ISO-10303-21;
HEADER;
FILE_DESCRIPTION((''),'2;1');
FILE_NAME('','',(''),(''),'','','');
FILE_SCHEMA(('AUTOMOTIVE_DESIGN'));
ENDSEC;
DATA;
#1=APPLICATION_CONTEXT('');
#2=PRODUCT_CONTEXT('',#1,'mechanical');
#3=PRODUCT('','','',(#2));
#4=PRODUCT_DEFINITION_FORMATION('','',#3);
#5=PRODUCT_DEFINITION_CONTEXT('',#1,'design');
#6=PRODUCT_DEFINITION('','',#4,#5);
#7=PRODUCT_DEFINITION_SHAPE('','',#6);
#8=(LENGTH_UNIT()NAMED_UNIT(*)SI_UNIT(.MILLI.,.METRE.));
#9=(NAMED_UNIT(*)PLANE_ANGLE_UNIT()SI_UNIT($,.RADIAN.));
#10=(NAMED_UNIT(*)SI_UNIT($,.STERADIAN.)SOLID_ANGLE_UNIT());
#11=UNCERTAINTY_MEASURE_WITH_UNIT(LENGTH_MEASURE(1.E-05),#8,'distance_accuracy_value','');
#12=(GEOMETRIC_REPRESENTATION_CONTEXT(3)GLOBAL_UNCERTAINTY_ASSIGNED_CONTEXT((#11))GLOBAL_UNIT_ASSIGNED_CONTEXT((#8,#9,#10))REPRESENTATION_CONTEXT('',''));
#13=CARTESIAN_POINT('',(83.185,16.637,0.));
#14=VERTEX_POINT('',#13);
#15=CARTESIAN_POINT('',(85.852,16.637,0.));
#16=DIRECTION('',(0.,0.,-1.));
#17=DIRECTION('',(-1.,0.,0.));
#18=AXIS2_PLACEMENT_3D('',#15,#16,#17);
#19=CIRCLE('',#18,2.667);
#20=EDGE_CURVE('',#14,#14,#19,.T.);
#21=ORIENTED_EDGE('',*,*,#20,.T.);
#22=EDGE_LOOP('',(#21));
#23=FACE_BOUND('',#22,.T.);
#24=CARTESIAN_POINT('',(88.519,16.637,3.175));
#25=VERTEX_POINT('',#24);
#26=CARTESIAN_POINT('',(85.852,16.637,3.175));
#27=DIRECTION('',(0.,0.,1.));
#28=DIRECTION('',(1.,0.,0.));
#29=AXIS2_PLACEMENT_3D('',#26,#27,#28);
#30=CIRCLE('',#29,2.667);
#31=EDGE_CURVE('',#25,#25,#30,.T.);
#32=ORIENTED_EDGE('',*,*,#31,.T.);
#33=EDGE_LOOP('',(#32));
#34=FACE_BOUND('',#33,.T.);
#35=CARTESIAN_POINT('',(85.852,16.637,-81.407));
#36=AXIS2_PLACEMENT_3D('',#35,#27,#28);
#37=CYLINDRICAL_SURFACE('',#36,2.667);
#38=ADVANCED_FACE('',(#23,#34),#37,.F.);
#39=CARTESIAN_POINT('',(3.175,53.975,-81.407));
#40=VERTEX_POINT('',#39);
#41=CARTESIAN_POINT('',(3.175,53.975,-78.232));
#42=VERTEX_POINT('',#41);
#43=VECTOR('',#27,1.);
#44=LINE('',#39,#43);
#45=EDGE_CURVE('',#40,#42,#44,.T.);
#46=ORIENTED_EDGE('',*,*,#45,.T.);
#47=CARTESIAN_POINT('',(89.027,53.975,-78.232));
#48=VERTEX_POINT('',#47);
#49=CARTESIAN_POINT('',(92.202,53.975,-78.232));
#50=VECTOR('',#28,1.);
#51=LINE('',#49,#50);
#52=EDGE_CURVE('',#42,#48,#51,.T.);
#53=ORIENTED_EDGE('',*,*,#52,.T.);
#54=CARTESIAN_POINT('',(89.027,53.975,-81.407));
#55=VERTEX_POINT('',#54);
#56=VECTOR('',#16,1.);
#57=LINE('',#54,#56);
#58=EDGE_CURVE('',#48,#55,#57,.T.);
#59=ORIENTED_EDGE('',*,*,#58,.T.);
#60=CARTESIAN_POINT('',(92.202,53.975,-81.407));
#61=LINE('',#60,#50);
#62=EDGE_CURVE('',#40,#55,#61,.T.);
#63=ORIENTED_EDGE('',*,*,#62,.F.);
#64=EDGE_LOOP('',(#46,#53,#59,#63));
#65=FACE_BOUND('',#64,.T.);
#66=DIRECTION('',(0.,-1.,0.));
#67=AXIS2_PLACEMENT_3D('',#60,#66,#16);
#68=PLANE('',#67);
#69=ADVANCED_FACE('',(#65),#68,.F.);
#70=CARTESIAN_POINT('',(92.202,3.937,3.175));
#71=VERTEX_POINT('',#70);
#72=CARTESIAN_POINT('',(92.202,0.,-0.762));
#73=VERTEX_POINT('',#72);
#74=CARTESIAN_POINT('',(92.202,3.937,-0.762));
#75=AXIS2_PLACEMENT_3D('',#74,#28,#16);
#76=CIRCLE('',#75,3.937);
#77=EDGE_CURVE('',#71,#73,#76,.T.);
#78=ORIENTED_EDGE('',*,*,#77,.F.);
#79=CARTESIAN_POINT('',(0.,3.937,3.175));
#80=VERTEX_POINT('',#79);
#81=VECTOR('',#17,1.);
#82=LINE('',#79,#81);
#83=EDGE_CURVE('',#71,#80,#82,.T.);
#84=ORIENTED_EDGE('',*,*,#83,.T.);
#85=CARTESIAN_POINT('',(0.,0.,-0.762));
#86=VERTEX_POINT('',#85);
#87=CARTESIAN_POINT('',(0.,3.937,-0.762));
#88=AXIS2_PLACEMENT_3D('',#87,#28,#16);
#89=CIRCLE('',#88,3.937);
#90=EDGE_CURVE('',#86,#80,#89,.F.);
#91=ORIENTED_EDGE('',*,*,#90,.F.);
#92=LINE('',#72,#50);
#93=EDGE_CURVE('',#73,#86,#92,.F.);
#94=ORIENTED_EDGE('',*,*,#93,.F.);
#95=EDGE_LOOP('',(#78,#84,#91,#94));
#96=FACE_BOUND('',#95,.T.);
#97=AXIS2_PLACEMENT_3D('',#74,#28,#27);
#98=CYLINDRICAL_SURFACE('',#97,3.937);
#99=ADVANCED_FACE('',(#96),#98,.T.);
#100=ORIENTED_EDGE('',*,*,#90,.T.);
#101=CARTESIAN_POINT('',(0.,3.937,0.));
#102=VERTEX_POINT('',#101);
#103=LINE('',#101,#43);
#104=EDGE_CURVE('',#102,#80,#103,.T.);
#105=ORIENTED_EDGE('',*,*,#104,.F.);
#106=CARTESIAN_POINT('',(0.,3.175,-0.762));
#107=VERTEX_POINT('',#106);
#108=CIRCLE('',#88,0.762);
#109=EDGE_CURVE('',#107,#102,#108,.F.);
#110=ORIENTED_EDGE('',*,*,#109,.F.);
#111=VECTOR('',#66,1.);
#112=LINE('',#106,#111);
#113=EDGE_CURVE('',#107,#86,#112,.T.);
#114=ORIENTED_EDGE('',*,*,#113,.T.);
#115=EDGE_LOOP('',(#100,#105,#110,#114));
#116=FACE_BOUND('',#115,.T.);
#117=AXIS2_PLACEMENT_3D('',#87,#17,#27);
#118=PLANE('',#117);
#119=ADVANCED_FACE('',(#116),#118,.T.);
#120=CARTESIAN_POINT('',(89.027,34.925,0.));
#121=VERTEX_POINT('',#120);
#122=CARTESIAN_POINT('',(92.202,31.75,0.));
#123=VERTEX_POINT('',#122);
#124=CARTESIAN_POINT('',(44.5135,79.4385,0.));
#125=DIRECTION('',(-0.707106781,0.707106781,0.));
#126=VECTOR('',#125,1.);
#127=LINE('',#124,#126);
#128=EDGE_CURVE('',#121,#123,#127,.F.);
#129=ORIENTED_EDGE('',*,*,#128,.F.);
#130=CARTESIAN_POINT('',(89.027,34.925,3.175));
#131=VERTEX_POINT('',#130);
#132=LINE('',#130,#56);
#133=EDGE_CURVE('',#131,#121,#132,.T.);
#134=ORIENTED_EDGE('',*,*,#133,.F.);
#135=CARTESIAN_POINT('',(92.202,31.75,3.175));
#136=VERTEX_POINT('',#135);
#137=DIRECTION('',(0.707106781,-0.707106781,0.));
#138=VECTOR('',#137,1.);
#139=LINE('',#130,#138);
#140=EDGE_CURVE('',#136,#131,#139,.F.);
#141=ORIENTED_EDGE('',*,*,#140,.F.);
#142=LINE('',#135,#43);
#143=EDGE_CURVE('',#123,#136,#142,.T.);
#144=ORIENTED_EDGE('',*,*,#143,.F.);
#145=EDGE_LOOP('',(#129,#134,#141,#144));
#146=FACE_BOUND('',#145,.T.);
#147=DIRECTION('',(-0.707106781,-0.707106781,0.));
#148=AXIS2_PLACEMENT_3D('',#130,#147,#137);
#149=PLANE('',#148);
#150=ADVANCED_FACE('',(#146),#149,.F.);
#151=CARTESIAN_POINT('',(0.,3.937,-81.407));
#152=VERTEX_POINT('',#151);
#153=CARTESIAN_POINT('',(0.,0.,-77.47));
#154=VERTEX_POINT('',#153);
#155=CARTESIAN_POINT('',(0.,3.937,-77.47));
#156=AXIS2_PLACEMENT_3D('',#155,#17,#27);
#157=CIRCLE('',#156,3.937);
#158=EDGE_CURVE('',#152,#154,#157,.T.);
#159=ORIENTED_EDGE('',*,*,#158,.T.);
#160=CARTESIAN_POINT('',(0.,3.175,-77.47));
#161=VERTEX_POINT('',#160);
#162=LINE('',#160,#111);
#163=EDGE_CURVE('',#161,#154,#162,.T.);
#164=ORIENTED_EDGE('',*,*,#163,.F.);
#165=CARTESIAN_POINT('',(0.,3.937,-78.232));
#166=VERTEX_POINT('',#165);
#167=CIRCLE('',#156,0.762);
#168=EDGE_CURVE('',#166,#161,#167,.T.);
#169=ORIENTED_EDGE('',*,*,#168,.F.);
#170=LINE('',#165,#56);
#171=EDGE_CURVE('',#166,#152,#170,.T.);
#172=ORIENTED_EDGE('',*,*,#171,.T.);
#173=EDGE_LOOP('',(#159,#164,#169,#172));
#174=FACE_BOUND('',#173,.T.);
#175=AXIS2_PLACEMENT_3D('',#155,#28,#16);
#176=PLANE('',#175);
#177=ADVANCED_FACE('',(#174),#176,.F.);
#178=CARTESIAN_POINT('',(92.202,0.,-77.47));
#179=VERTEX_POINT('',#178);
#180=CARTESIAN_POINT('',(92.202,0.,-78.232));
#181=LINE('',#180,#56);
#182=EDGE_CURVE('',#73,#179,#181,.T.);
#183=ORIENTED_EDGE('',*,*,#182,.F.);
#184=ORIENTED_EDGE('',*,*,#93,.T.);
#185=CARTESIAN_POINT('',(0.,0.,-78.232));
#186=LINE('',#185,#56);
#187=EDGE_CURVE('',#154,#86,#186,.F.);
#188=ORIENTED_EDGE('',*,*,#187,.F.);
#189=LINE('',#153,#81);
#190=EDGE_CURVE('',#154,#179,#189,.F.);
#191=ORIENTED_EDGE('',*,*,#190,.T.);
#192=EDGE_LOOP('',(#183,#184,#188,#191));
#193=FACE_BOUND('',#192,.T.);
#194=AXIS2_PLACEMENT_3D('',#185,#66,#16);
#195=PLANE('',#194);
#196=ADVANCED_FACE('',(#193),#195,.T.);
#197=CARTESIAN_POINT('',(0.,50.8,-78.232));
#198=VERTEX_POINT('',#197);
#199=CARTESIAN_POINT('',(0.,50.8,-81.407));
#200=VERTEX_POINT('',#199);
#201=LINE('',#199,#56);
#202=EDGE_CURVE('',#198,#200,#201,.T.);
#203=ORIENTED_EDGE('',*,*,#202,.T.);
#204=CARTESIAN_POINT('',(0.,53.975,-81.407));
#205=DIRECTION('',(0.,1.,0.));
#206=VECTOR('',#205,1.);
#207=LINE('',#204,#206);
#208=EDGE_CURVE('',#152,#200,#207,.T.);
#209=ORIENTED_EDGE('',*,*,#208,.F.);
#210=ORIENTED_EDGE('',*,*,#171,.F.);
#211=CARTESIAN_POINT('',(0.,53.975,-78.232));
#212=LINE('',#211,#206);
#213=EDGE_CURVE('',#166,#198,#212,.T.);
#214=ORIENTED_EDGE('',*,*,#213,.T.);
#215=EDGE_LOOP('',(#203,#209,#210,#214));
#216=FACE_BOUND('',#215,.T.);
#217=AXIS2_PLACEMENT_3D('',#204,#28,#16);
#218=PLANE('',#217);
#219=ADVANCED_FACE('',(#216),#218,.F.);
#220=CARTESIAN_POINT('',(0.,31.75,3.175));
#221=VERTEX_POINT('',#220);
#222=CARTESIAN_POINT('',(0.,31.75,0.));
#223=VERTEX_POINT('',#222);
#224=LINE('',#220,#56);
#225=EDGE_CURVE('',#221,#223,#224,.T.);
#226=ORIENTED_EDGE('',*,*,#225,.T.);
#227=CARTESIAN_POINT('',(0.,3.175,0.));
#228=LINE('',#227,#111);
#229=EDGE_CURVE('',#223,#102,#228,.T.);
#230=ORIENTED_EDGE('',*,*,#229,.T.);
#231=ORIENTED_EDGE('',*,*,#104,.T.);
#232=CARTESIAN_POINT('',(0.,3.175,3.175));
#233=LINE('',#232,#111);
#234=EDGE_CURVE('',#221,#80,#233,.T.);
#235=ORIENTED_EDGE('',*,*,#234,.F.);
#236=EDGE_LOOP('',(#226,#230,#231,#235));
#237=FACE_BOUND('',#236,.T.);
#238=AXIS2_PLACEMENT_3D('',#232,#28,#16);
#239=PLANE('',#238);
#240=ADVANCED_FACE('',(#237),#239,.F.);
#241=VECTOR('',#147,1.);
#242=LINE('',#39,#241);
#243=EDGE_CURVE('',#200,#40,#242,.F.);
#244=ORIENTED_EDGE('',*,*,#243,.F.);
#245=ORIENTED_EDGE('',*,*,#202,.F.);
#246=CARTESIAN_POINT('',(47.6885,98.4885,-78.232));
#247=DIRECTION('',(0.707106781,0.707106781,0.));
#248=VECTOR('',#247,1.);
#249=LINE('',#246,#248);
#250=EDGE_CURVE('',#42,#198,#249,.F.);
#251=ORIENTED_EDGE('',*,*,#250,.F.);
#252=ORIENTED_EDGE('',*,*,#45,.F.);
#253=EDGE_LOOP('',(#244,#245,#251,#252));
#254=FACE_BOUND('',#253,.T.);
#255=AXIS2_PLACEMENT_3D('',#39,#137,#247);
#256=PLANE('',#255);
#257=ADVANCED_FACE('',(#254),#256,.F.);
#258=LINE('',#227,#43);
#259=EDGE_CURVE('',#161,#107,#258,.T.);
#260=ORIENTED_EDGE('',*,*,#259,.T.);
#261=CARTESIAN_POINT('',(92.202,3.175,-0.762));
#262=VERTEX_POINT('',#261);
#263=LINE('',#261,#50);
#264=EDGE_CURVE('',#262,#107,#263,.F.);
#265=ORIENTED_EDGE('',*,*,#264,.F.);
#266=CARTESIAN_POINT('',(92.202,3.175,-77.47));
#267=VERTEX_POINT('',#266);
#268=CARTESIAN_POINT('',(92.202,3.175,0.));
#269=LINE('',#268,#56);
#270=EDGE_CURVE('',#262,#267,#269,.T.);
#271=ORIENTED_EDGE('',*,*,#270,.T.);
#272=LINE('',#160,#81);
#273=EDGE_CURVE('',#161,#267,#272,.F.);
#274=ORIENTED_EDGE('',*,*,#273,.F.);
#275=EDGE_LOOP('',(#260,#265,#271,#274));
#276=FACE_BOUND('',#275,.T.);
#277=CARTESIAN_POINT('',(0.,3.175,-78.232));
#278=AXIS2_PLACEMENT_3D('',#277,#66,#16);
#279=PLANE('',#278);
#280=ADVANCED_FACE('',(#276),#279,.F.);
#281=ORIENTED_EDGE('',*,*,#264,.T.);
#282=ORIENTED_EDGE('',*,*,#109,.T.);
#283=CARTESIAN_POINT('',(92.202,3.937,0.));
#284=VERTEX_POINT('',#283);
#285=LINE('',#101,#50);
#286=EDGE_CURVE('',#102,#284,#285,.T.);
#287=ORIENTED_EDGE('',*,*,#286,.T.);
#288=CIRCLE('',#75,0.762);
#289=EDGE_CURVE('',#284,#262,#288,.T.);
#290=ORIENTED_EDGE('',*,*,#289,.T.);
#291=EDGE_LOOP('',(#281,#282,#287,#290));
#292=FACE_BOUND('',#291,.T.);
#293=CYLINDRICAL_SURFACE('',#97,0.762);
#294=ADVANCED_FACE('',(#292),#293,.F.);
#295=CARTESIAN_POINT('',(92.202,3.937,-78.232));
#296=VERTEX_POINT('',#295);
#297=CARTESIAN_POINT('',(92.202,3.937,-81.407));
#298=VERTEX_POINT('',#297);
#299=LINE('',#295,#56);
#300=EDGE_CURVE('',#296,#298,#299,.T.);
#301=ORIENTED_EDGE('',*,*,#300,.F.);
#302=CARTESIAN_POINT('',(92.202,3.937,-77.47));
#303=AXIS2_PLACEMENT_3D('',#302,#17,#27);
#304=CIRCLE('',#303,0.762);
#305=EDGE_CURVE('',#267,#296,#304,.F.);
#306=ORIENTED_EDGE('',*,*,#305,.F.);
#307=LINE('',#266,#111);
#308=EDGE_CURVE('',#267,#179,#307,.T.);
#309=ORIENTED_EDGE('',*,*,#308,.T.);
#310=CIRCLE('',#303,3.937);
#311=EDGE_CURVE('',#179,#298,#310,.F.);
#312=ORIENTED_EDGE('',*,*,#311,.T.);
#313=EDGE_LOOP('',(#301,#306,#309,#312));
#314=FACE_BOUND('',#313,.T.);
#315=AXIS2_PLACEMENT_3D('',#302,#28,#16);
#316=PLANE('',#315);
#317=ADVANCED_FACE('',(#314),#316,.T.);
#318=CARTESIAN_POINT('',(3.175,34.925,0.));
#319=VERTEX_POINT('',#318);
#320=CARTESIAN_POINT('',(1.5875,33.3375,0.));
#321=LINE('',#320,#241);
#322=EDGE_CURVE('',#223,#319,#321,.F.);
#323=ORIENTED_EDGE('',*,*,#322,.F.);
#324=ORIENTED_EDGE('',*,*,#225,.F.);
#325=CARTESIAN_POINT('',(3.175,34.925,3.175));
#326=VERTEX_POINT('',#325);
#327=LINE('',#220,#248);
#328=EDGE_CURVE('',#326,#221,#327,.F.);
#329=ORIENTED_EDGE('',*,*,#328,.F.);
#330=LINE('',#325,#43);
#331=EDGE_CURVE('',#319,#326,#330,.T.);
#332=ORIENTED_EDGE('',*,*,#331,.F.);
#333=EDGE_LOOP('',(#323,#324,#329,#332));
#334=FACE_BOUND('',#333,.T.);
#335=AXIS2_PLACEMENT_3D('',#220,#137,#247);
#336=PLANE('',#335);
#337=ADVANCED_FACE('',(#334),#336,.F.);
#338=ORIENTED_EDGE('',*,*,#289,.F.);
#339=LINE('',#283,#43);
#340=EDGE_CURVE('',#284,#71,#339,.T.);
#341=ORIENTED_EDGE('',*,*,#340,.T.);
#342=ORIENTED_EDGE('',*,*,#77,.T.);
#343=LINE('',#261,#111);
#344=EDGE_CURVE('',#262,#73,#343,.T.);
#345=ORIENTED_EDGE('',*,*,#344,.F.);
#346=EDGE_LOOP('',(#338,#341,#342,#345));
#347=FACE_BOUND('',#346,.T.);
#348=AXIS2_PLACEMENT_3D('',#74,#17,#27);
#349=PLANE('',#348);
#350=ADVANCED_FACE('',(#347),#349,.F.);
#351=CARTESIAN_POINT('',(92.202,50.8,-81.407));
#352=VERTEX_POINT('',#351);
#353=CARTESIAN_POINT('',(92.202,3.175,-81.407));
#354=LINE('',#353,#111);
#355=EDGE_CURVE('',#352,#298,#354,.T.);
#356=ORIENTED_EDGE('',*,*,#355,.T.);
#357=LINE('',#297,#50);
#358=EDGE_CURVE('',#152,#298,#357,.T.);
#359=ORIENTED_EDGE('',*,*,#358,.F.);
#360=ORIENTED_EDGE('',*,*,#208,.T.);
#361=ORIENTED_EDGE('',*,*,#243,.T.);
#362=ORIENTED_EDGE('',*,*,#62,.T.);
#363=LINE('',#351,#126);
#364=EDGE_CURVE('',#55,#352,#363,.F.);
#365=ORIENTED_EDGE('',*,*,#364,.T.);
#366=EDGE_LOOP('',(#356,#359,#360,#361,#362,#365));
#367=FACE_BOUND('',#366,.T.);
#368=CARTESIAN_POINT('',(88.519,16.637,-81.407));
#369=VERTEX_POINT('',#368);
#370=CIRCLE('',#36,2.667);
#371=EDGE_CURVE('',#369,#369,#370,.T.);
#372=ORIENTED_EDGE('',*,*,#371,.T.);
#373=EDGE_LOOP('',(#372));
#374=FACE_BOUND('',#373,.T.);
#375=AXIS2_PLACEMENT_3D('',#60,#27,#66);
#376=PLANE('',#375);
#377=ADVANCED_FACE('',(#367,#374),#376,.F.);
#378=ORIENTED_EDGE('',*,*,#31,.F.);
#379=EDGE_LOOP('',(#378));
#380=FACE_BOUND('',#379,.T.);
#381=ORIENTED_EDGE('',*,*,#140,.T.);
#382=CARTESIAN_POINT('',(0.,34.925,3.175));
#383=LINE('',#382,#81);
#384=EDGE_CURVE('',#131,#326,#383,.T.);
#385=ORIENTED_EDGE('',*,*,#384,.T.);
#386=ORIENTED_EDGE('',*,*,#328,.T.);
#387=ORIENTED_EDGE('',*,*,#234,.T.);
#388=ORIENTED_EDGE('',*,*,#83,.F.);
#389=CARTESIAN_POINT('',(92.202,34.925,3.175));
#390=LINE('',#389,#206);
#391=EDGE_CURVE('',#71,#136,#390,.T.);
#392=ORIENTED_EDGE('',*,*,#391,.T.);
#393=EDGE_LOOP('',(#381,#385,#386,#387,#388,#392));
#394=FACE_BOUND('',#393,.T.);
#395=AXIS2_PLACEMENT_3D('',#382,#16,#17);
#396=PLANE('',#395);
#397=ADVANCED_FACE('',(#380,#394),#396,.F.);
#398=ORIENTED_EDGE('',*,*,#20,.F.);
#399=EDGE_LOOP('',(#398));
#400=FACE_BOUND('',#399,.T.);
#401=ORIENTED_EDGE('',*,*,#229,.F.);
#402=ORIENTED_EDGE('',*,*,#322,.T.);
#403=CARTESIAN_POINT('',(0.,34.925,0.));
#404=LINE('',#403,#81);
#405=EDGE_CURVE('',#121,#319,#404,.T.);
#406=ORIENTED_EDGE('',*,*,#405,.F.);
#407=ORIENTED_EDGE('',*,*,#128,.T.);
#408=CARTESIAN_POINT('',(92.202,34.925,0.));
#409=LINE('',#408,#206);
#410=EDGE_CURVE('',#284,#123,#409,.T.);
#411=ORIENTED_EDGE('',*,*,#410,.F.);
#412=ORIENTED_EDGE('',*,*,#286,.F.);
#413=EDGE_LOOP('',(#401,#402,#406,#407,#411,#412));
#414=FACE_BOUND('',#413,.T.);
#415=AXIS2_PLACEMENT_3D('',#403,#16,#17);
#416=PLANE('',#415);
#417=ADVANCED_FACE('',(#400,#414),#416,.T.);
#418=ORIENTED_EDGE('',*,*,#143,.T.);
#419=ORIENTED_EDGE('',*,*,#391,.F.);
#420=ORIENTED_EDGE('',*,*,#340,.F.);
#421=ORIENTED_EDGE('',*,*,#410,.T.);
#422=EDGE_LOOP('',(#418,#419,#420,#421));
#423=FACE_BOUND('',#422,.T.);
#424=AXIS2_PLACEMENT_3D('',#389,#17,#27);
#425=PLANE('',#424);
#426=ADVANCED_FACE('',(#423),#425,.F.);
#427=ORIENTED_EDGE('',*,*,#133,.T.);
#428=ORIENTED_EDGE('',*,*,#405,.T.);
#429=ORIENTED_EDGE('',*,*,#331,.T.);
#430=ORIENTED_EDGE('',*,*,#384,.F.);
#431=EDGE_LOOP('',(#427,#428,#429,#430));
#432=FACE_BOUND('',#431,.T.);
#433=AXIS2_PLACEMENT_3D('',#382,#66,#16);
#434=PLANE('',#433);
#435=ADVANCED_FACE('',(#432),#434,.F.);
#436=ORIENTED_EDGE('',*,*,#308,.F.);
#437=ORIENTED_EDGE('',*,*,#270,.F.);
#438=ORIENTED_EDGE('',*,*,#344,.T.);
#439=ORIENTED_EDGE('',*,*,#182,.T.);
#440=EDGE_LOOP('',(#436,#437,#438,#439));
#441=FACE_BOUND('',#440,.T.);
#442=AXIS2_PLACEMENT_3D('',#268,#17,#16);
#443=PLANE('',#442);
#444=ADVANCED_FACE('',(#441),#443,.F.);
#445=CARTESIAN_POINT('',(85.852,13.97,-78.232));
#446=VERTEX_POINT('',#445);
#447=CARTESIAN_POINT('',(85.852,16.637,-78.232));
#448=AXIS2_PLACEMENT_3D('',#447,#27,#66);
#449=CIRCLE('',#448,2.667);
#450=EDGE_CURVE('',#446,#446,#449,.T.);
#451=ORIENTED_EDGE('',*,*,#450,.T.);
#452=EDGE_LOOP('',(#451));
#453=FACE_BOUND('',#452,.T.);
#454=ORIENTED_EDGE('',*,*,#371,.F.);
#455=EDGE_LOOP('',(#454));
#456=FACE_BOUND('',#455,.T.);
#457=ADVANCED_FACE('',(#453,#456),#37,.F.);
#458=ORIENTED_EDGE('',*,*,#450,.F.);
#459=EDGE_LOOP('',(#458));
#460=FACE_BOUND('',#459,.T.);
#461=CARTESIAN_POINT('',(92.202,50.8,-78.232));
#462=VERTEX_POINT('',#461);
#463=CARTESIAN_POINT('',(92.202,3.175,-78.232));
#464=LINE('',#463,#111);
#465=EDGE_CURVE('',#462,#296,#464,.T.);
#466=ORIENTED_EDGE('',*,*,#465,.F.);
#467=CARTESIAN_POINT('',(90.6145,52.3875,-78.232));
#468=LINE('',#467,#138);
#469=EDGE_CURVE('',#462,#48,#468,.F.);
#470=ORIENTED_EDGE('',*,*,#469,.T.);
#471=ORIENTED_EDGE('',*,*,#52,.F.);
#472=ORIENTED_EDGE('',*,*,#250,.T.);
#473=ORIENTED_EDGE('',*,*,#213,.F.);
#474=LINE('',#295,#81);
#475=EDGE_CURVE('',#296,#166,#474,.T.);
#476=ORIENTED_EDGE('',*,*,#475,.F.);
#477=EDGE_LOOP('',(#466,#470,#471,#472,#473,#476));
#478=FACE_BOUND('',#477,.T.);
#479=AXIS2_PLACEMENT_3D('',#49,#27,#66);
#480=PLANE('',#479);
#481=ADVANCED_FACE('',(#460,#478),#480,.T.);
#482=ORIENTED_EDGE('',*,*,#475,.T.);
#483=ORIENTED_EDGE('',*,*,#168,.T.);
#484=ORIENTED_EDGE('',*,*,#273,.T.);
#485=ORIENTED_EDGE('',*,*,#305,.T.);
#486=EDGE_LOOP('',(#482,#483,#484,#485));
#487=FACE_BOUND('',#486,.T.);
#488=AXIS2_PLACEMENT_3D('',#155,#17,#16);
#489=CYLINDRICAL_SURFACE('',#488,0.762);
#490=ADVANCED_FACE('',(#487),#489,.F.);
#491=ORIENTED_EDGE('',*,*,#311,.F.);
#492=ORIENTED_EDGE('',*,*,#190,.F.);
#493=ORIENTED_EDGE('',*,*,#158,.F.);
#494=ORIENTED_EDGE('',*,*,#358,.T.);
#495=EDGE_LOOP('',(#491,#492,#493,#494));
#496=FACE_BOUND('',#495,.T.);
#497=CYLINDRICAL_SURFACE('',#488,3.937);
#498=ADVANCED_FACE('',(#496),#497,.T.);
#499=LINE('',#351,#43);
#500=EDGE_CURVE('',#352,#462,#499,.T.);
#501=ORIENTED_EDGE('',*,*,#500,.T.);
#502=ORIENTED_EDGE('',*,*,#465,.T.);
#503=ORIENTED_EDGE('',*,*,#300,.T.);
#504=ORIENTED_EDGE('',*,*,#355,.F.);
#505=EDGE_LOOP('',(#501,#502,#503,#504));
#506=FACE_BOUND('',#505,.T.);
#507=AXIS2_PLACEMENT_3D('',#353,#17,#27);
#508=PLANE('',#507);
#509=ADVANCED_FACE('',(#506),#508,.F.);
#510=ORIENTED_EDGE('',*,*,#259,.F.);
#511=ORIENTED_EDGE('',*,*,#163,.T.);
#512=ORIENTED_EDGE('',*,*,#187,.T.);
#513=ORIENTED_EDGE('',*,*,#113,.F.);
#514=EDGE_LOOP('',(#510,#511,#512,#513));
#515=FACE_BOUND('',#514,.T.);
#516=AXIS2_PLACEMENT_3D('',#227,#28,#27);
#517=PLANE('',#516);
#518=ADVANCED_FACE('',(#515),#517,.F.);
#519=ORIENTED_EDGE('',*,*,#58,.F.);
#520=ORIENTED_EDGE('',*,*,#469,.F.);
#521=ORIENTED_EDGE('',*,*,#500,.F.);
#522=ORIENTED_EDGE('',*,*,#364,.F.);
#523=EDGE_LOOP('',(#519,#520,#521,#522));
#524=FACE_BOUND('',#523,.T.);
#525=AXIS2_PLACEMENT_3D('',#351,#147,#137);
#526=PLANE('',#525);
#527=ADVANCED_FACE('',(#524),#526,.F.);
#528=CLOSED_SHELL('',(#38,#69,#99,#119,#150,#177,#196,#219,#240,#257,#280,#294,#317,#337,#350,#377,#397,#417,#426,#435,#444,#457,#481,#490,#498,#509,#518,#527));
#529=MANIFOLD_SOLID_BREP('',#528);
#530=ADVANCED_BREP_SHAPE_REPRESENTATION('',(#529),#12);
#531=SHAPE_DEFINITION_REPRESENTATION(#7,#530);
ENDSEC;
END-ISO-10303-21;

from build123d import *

# Parameters (mm, degrees)
SKETCH1_W            = 92.202
SKETCH1_H            = 78.232
BOSS_EXTRUDE1_DEPTH  = 3.175
EDGE_FLANGE1_DEPTH   = 92.202
EDGE_FLANGE1_2_DEPTH = 92.202
EDGE_FLANGE2_DEPTH   = 92.202
EDGE_FLANGE2_2_DEPTH = 92.202
SKETCH9_R            = 2.667
CUT_EXTRUDE1_DEPTH   = 137.266738983
CHAMFER1_SIZE        = 3.175


# Read off the part's stored shape, not the designer's step: Edge-Flange1, Edge-Flange2
with BuildPart() as part:
    # Sketch1 → Boss-Extrude1 (new body)
    with BuildSketch(Plane(origin=(0, 0, 0), x_dir=(1, 0, 0), z_dir=(0, 1, 0))):
        with Locations((46.101, 39.116)):
            Rectangle(SKETCH1_W, SKETCH1_H)
    extrude(amount=BOSS_EXTRUDE1_DEPTH)

    # Edge-Flange1 outline → Edge-Flange1 (cut)
    with BuildSketch(Plane.YZ):
        with BuildLine():
            Line((0, -78.232), (0.074445793, -78.232))
            ThreePointArc((0.074445793, -78.232), (0.018655648, -77.852813981), (0, -77.47))
            Line((0, -77.47), (0, -78.232))
        make_face()
    extrude(amount=EDGE_FLANGE1_DEPTH, mode=Mode.SUBTRACT)

    # Edge-Flange1 2 outline → Edge-Flange1 2 (add)
    with BuildSketch(Plane.YZ):
        with BuildLine():
            ThreePointArc((0.074445793, -78.232), (1.4370025, -80.511378224), (3.937, -81.407))
            Line((3.937, -81.407), (53.975, -81.407))
            Line((53.975, -81.407), (53.975, -78.232))
            Line((53.975, -78.232), (3.937, -78.232))
            ThreePointArc((3.937, -78.232), (3.398184633, -78.008815367), (3.175, -77.47))
            Line((3.175, -77.47), (3.175, -78.232))
            Line((3.175, -78.232), (0.074445793, -78.232))
        make_face()
    extrude(amount=EDGE_FLANGE1_2_DEPTH)

    # Edge-Flange2 outline → Edge-Flange2 (cut)
    with BuildSketch(Plane.YZ):
        with BuildLine():
            ThreePointArc((0, -0.762), (0.018655648, -0.379186019), (0.074445793, 0))
            Line((0.074445793, 0), (0, 0))
            Line((0, 0), (0, -0.762))
        make_face()
    extrude(amount=EDGE_FLANGE2_DEPTH, mode=Mode.SUBTRACT)

    # Edge-Flange2 2 outline → Edge-Flange2 2 (add)
    with BuildSketch(Plane.YZ):
        with BuildLine():
            Line((34.925, 3.175), (3.937, 3.175))
            ThreePointArc((3.937, 3.175), (1.4370025, 2.279378224), (0.074445793, 0))
            Line((0.074445793, 0), (3.175, 0))
            Line((3.175, 0), (3.175, -0.762))
            ThreePointArc((3.175, -0.762), (3.398184633, -0.223184633), (3.937, 0))
            Line((3.937, 0), (34.925, 0))
            Line((34.925, 0), (34.925, 3.175))
        make_face()
    extrude(amount=EDGE_FLANGE2_2_DEPTH)

    # Sketch9 → Cut-Extrude1 (cut, through all)
    with BuildSketch(Plane.XY.offset(3.175)):
        with Locations((85.852, 16.637)):
            Circle(SKETCH9_R)
    extrude(amount=-CUT_EXTRUDE1_DEPTH, mode=Mode.SUBTRACT)

    # Chamfer1
    chamfer1_edges = [part.edges().sort_by_distance(p)[0] for p in [
        (92.202, 53.975, -79.8195),
        (0, 53.975, -79.8195),
        (0, 34.925, 1.5875),
        (92.202, 34.925, 1.5875),
    ]]
    chamfer(chamfer1_edges, length=CHAMFER1_SIZE)


solid = part.part
